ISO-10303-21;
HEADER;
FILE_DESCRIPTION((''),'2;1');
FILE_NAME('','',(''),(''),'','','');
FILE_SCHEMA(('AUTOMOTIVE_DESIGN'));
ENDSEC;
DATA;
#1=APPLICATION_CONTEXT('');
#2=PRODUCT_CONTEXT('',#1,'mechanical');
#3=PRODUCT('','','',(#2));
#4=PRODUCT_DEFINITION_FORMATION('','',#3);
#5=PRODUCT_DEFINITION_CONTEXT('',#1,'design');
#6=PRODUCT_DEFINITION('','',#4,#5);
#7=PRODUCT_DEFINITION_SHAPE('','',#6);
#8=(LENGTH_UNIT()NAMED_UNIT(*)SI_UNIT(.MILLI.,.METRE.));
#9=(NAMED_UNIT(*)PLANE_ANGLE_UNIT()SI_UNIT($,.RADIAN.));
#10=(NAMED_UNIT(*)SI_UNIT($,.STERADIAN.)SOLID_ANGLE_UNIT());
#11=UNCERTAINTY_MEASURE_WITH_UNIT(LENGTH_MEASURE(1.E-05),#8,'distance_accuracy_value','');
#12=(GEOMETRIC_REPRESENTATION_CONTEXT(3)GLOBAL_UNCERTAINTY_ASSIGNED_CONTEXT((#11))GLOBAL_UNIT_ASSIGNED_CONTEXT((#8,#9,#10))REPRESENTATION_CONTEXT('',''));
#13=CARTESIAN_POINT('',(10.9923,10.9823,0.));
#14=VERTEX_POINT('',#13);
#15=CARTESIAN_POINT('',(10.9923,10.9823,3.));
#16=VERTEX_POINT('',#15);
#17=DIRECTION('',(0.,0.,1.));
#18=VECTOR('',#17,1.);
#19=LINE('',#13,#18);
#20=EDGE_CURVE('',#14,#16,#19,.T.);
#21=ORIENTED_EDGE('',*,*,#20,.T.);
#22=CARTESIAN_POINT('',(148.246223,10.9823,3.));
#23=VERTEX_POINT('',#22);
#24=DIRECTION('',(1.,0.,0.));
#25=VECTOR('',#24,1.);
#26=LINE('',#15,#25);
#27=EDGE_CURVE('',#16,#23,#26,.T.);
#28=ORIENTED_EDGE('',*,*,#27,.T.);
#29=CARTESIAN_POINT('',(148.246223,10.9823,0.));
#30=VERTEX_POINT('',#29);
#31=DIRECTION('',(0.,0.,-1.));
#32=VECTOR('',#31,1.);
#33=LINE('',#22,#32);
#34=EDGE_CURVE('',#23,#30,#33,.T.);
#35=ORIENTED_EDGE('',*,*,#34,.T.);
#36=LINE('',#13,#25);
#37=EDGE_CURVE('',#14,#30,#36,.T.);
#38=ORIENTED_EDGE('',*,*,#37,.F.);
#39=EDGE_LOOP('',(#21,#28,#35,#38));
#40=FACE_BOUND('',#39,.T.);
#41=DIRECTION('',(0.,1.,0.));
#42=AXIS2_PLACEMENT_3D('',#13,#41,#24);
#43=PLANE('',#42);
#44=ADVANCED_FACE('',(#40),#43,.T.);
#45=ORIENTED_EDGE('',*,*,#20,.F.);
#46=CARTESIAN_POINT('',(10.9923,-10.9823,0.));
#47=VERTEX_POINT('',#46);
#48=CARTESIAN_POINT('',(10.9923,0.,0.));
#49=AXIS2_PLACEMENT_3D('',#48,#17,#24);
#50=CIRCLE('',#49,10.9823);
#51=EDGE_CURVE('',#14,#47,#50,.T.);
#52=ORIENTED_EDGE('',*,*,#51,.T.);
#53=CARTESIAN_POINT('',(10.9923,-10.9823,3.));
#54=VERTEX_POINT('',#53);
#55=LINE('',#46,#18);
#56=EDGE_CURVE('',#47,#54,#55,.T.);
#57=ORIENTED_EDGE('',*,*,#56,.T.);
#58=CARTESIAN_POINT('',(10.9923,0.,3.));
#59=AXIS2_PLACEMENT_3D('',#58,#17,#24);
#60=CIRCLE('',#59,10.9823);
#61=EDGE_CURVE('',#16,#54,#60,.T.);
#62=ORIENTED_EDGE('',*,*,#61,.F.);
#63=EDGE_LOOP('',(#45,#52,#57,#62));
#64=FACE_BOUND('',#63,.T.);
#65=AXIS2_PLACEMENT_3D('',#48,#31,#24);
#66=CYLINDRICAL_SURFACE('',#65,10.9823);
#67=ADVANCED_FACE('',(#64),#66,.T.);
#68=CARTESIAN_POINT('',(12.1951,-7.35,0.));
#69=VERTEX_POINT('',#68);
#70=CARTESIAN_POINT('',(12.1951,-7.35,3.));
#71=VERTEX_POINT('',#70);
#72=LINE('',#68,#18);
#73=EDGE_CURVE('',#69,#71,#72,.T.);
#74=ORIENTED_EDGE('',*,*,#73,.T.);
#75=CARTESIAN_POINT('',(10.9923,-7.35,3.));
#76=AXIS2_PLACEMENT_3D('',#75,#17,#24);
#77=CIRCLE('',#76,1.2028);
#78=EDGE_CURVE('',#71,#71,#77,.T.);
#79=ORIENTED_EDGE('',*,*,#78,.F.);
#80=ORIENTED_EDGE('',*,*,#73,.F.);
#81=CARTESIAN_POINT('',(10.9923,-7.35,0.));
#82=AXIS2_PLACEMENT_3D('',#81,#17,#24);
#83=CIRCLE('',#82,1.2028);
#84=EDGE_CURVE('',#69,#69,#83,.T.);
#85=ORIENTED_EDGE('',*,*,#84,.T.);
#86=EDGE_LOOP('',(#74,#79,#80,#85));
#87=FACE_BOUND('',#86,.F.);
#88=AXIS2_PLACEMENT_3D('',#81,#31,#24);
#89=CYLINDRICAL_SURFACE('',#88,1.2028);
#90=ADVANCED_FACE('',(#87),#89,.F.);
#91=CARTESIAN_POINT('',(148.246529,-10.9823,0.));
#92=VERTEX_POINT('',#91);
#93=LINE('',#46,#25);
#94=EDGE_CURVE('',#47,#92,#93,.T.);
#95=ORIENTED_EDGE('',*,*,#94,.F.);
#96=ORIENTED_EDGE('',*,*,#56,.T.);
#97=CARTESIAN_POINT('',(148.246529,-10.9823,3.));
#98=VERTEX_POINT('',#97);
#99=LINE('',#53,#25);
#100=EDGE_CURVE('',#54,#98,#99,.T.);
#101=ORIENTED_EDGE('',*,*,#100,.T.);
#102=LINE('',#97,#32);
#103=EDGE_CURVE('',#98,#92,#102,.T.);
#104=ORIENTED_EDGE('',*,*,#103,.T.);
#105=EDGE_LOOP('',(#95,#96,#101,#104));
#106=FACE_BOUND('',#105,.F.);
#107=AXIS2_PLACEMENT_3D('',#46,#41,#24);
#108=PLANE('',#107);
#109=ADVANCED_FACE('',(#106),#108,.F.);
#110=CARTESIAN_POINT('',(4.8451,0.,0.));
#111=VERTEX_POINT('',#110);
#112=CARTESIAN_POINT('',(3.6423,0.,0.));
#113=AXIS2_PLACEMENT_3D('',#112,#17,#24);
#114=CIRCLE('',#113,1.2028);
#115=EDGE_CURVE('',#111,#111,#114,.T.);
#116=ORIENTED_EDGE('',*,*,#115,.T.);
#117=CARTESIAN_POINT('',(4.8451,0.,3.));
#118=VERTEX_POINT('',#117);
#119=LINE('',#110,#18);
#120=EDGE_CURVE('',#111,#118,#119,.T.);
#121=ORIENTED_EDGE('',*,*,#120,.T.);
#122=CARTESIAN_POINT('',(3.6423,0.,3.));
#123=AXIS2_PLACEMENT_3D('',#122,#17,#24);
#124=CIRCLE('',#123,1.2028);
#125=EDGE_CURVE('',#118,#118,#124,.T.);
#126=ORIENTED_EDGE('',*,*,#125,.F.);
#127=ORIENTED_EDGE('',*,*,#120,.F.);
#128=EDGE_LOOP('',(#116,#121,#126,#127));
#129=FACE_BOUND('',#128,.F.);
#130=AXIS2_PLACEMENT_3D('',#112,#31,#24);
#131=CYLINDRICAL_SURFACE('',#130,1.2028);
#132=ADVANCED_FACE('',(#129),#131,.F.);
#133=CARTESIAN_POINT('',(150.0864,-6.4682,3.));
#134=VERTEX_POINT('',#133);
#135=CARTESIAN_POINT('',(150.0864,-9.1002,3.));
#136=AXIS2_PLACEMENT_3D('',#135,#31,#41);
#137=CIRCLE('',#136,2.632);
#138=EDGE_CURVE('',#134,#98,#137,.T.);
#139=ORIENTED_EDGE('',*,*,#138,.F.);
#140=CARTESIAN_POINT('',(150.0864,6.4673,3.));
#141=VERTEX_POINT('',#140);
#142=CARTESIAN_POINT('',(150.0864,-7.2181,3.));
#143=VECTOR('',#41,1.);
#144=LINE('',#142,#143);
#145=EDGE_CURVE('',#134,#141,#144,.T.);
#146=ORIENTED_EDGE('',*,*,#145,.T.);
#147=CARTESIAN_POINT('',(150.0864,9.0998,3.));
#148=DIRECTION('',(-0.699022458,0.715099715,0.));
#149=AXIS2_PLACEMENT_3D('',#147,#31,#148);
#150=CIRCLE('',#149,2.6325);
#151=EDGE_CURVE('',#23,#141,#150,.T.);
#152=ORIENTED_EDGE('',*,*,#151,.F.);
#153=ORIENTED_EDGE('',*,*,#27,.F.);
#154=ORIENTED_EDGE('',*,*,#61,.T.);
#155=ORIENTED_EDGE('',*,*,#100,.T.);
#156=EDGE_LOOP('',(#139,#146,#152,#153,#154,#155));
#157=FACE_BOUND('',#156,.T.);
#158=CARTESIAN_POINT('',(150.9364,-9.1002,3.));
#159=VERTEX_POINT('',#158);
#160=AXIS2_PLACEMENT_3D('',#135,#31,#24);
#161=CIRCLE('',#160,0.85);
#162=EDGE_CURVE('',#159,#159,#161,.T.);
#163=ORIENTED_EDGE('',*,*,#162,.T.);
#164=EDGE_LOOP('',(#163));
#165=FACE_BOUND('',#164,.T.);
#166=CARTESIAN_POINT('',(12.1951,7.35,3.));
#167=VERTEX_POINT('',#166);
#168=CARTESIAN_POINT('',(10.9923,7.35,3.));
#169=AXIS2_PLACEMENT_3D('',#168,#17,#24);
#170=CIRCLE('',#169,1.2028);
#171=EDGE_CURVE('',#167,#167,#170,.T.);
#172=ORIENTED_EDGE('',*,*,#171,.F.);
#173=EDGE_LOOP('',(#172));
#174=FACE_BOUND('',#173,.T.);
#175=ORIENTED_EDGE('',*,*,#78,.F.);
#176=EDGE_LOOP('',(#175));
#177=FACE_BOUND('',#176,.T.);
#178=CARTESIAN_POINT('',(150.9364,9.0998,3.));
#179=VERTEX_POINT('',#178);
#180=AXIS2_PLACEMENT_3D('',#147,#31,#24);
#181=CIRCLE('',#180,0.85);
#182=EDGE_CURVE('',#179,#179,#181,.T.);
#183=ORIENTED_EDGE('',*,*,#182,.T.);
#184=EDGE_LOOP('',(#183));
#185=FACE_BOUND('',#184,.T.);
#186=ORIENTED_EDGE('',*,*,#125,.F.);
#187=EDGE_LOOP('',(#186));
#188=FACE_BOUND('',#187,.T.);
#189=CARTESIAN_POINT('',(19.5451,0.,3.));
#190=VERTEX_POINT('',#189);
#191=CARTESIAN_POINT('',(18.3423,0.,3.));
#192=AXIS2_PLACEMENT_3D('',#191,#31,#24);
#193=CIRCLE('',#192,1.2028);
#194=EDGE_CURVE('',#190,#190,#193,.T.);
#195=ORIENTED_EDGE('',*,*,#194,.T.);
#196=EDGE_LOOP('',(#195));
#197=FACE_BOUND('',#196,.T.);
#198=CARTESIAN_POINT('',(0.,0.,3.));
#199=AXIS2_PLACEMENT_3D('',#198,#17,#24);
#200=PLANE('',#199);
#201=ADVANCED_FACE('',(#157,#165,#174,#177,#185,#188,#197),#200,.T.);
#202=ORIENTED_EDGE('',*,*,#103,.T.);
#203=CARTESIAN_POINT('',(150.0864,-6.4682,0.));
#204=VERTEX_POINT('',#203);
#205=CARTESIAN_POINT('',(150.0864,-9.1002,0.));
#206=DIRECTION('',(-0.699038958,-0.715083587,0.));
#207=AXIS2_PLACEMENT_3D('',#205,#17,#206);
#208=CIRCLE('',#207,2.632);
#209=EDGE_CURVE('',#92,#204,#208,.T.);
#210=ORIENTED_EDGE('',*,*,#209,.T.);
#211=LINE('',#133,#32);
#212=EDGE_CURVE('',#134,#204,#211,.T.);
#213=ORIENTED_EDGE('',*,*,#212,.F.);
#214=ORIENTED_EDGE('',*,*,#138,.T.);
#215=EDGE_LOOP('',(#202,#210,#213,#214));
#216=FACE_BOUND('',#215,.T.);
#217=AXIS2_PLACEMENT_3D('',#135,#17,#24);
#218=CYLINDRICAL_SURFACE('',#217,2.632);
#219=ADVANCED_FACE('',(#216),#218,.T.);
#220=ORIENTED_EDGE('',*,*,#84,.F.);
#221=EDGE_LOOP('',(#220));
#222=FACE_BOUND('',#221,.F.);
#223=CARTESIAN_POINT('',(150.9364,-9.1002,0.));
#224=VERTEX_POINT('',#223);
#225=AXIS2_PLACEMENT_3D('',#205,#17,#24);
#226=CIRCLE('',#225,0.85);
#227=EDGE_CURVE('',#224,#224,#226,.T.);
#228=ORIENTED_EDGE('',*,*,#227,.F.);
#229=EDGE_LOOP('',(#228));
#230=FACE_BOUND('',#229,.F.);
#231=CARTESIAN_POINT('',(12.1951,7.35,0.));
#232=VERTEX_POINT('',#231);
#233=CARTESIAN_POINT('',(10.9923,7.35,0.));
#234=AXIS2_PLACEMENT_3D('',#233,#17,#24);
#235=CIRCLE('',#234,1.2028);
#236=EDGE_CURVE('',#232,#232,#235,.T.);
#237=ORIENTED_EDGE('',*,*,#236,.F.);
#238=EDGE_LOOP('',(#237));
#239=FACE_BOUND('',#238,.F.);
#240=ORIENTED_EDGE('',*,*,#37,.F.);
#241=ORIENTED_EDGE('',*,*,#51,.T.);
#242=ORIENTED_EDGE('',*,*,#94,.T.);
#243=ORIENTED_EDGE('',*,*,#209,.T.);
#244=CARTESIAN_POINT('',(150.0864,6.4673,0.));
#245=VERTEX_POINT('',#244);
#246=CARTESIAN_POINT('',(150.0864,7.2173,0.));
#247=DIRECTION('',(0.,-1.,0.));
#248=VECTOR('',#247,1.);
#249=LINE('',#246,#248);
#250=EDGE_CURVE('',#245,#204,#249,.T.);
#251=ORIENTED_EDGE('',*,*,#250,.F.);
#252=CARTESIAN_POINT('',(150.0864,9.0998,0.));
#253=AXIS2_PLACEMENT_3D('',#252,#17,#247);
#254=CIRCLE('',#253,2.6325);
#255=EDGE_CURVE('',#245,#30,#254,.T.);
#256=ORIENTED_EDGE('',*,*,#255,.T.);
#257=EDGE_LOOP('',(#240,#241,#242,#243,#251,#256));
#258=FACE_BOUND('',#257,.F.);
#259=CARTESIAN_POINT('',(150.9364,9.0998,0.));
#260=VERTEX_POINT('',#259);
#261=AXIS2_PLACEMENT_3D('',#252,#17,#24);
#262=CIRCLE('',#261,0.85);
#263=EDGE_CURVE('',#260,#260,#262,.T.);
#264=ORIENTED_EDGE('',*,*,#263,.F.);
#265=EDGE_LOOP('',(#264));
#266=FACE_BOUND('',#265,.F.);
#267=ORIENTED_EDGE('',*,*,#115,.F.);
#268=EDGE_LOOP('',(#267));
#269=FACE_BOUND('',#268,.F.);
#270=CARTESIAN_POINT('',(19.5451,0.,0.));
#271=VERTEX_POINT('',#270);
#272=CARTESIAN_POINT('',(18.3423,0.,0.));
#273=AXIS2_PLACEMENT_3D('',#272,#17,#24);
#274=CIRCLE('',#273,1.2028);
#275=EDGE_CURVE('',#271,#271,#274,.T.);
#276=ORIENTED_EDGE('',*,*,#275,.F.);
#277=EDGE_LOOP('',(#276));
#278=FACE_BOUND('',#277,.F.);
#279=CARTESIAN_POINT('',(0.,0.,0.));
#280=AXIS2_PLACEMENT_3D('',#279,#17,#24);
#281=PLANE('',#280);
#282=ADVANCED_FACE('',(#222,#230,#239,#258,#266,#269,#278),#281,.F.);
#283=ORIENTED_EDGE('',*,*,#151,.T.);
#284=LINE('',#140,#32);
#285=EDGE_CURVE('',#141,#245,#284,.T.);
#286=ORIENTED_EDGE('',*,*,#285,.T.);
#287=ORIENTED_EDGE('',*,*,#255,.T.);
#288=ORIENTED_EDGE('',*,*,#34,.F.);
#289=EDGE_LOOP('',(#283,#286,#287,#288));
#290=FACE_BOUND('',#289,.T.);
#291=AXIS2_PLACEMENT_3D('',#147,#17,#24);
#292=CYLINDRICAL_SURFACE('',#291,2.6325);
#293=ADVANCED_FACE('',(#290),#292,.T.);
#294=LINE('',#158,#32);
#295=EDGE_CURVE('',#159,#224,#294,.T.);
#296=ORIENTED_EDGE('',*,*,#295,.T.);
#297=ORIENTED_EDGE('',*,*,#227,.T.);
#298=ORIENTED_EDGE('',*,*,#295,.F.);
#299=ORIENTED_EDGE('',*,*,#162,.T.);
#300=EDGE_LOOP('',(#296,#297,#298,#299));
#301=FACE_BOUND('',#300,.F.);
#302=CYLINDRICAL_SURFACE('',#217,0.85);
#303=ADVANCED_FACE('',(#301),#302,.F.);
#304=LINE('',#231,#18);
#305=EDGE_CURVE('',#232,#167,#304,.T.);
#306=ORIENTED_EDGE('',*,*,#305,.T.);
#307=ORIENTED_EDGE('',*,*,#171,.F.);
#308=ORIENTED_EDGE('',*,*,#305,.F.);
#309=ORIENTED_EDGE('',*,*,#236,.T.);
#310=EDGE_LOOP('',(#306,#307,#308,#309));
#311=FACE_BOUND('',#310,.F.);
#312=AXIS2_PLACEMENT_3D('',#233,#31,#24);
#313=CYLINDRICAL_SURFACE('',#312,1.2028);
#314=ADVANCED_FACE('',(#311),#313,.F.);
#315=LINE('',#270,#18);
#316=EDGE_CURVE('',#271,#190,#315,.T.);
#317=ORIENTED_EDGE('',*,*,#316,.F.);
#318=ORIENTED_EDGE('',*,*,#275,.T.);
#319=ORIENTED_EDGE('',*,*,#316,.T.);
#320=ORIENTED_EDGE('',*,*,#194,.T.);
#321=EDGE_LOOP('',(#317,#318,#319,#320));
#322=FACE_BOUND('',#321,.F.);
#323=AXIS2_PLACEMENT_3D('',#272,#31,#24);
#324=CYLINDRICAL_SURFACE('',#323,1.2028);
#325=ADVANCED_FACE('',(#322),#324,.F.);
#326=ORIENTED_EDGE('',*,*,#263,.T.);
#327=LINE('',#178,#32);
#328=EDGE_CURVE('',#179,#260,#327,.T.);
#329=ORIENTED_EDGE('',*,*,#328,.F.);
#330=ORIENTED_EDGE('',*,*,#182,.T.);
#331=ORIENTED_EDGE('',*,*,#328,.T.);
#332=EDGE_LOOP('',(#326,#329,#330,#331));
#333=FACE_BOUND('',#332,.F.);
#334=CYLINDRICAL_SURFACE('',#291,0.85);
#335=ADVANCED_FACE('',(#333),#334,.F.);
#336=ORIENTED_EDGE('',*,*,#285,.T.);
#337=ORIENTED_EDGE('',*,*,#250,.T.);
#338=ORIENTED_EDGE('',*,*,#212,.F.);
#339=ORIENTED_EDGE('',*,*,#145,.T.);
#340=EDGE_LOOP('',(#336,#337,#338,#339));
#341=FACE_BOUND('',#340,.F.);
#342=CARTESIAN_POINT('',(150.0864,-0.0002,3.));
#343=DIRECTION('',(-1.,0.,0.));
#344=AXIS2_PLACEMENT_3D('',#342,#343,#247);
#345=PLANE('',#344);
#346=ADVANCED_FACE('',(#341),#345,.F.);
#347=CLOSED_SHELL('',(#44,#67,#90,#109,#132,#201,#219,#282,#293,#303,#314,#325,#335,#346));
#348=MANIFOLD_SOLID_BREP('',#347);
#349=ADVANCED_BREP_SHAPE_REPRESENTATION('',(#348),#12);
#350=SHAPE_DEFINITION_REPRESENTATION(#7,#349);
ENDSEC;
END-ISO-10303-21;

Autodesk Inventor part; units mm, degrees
ref_plane "YZ Plane" through (0, 0, 0) normal (1, 0, 0) x (0, 1, 0)
ref_plane "XZ Plane" through (0, 0, 0) normal (0, 1, 0) x (-1, 0, 0)
ref_plane "XY Plane" through (0, 0, 0) normal (0, 0, 1) x (1, 0, 0)
ref_plane "Plano de trabajo1" through (0, 0, 0) normal (0, 0, 1) x (1, 0, 0)
sketch "Boceto1" plane through (0, 0, 0) normal (0, 0, 1) x (1, 0, 0)
  circle A0 centre (10.9923, 0) radius 10.9823 projected
  circle A1 centre (10.9923, 7.35) radius 1.2028 projected
  circle A2 centre (3.6423, 0) radius 1.2028 projected
  circle A3 centre (18.3423, 0) radius 1.2028 projected
  circle A4 centre (18.7153, -9.5116) radius 1.05 projected
  circle A5 centre (10.9923, -7.35) radius 1.2028 projected
  line L0 (10.9923, 0) -> (160.9923, 0)
  line L1 (10.9923, 10.9823) -> (160.9923, 10.9823)
  line L2 (10.9923, -10.9823) -> (160.9923, -10.9823)
  line L3 (160.9923, -10.9823) -> (160.9923, 10.9823)
  point P0 (0, 0)
  dimension "d0" = 150
extrude "Extrusión1" add sketch "Boceto1" along normal blind 3
sketch "Boceto2" plane through (0, 0, 3) normal (0, 0, 1) x (1, 0, 0)
  arc A0 (151.1597, 5.5871) -> (154.1073, 8.4343) centre (150.0864, 9.6477) ccw projected
  circle A1 centre (150.0864, -8.5523) radius 0.85 projected
  circle A2 centre (150.0864, 9.6477) radius 0.85 projected
  line L0 (160.9923, 10.9823) -> (10.9923, 10.9823) projected
  line L1 (10.9923, -10.9823) -> (160.9923, -10.9823) projected
  line L2 (160.9923, -10.9823) -> (160.9923, 10.9823) projected
  line L3 (160.9923, 10.9823) -> (10.9923, 10.9823) projected
  arc A3 (10.9923, 10.9823) -> (10.9923, -10.9823) centre (10.9923, 0) ccw projected
  circle A4 centre (18.7153, -9.5116) radius 1.05 projected
  circle A5 centre (10.9923, 7.35) radius 1.2028 projected
  circle A6 centre (3.6423, 0) radius 1.2028 projected
  circle A7 centre (10.9923, -7.35) radius 1.2028 projected
  circle A8 centre (18.3423, 0) radius 1.2028 projected
  line L4 (150.0864, 10.9823) -> (150.0864, -0.0002)
  line L5 (150.0864, -0.0002) -> (150.0864, -9.1002)
  line L6 (150.0864, -0.0002) -> (150.0864, 9.0998)
  circle A9 centre (150.0864, 9.0998) radius 0.85
  circle A10 centre (150.0864, -9.1002) radius 0.85
  circle A11 centre (150.0864, 9.0998) radius 1.8825
  circle A12 centre (150.0864, -9.1002) radius 1.8821
  point P0 (0, 0)
  point P1 (150.0864, 7.2173)
  point P2 (150.0864, -7.218)
  point P3 (150.0864, -10.9823)
  dimension "d3" = 10.9825
  dimension "d4" = 9.1
  dimension "d5" = 9.1
  dimension "d6" = 1.7
  dimension "d7" = 1.7
extrude "Extrusión2" cut sketch "Boceto2" against normal blind 3 contours A10 A1 | A1 A10 | A9 L4 A2 | A2 L4 A9 | A9 L4 A2 | A2 L4 A9 | L0 L2 L1 A12 L5 L4 A11 picked at (150.2191, 8.6309) picked at (150.5614, 9.2824) picked at (149.6114, 9.2824) picked at (149.9501, 8.6317)
sketch "Boceto3" plane through (0, 0, 3) normal (0, 0, 1) x (1, 0, 0)
  point P0 (0, 0)
sketch "Boceto4" plane through (0, 0, 3) normal (0, 0, 1) x (1, 0, 0)
  circle A0 centre (18.7153, -9.5116) radius 1.05 projected
  point P0 (0, 0)
extrude "Extrusión3" add sketch "Boceto4" against normal blind 3
sketch "Boceto5" plane through (0, 0, 3) normal (0, 0, 1) x (1, 0, 0)
  circle A0 centre (150.0864, 9.0998) radius 0.85 projected
  circle A1 centre (150.0864, -9.1002) radius 0.85 projected
  circle A2 centre (150.0864, 9.0998) radius 2.6325
  circle A3 centre (150.0864, -9.1002) radius 2.632
  line L0 (150.0864, -7.218) -> (150.0864, 7.2173) projected
  circle A4 centre (18.3423, 0) radius 1.2028 projected
  circle A5 centre (10.9923, -7.35) radius 1.2028 projected
  circle A6 centre (3.6423, 0) radius 1.2028 projected
  circle A7 centre (10.9923, 7.35) radius 1.2028 projected
  arc A8 (150.0864, -10.9823) -> (150.0864, -7.218) centre (150.0864, -9.1002) ccw projected
  line L1 (150.0864, -7.218) -> (150.0864, 7.2173) projected
  arc A9 (150.0864, 7.2173) -> (150.0864, 10.9823) centre (150.0864, 9.0998) ccw projected
  line L2 (150.0864, 10.9823) -> (10.9923, 10.9823) projected
  arc A10 (10.9923, 10.9823) -> (10.9923, -10.9823) centre (10.9923, 0) ccw projected
  line L3 (10.9923, -10.9823) -> (150.0864, -10.9823) projected
  circle A11 centre (150.0864, -9.1002) radius 0.85 projected
  circle A12 centre (150.0864, 9.0998) radius 0.85 projected
  point P0 (0, 0)
  point P1 (148.2466, -10.9823)
  point P2 (150.0864, -6.4682)
  point P3 (150.0864, 6.4673)
  point P4 (148.2462, 10.9823)
  dimension "d12" = 5.265
  dimension "d13" = 5.264
extrude "Extrusión4" add sketch "Boceto5" against normal blind 3 contours A2 L0 A9 L2 | A3 L3 A8 L0 picked at (149.0222, 11.1076) picked at (149.0224, -11.1076)
properties part number "tibiaMot"
